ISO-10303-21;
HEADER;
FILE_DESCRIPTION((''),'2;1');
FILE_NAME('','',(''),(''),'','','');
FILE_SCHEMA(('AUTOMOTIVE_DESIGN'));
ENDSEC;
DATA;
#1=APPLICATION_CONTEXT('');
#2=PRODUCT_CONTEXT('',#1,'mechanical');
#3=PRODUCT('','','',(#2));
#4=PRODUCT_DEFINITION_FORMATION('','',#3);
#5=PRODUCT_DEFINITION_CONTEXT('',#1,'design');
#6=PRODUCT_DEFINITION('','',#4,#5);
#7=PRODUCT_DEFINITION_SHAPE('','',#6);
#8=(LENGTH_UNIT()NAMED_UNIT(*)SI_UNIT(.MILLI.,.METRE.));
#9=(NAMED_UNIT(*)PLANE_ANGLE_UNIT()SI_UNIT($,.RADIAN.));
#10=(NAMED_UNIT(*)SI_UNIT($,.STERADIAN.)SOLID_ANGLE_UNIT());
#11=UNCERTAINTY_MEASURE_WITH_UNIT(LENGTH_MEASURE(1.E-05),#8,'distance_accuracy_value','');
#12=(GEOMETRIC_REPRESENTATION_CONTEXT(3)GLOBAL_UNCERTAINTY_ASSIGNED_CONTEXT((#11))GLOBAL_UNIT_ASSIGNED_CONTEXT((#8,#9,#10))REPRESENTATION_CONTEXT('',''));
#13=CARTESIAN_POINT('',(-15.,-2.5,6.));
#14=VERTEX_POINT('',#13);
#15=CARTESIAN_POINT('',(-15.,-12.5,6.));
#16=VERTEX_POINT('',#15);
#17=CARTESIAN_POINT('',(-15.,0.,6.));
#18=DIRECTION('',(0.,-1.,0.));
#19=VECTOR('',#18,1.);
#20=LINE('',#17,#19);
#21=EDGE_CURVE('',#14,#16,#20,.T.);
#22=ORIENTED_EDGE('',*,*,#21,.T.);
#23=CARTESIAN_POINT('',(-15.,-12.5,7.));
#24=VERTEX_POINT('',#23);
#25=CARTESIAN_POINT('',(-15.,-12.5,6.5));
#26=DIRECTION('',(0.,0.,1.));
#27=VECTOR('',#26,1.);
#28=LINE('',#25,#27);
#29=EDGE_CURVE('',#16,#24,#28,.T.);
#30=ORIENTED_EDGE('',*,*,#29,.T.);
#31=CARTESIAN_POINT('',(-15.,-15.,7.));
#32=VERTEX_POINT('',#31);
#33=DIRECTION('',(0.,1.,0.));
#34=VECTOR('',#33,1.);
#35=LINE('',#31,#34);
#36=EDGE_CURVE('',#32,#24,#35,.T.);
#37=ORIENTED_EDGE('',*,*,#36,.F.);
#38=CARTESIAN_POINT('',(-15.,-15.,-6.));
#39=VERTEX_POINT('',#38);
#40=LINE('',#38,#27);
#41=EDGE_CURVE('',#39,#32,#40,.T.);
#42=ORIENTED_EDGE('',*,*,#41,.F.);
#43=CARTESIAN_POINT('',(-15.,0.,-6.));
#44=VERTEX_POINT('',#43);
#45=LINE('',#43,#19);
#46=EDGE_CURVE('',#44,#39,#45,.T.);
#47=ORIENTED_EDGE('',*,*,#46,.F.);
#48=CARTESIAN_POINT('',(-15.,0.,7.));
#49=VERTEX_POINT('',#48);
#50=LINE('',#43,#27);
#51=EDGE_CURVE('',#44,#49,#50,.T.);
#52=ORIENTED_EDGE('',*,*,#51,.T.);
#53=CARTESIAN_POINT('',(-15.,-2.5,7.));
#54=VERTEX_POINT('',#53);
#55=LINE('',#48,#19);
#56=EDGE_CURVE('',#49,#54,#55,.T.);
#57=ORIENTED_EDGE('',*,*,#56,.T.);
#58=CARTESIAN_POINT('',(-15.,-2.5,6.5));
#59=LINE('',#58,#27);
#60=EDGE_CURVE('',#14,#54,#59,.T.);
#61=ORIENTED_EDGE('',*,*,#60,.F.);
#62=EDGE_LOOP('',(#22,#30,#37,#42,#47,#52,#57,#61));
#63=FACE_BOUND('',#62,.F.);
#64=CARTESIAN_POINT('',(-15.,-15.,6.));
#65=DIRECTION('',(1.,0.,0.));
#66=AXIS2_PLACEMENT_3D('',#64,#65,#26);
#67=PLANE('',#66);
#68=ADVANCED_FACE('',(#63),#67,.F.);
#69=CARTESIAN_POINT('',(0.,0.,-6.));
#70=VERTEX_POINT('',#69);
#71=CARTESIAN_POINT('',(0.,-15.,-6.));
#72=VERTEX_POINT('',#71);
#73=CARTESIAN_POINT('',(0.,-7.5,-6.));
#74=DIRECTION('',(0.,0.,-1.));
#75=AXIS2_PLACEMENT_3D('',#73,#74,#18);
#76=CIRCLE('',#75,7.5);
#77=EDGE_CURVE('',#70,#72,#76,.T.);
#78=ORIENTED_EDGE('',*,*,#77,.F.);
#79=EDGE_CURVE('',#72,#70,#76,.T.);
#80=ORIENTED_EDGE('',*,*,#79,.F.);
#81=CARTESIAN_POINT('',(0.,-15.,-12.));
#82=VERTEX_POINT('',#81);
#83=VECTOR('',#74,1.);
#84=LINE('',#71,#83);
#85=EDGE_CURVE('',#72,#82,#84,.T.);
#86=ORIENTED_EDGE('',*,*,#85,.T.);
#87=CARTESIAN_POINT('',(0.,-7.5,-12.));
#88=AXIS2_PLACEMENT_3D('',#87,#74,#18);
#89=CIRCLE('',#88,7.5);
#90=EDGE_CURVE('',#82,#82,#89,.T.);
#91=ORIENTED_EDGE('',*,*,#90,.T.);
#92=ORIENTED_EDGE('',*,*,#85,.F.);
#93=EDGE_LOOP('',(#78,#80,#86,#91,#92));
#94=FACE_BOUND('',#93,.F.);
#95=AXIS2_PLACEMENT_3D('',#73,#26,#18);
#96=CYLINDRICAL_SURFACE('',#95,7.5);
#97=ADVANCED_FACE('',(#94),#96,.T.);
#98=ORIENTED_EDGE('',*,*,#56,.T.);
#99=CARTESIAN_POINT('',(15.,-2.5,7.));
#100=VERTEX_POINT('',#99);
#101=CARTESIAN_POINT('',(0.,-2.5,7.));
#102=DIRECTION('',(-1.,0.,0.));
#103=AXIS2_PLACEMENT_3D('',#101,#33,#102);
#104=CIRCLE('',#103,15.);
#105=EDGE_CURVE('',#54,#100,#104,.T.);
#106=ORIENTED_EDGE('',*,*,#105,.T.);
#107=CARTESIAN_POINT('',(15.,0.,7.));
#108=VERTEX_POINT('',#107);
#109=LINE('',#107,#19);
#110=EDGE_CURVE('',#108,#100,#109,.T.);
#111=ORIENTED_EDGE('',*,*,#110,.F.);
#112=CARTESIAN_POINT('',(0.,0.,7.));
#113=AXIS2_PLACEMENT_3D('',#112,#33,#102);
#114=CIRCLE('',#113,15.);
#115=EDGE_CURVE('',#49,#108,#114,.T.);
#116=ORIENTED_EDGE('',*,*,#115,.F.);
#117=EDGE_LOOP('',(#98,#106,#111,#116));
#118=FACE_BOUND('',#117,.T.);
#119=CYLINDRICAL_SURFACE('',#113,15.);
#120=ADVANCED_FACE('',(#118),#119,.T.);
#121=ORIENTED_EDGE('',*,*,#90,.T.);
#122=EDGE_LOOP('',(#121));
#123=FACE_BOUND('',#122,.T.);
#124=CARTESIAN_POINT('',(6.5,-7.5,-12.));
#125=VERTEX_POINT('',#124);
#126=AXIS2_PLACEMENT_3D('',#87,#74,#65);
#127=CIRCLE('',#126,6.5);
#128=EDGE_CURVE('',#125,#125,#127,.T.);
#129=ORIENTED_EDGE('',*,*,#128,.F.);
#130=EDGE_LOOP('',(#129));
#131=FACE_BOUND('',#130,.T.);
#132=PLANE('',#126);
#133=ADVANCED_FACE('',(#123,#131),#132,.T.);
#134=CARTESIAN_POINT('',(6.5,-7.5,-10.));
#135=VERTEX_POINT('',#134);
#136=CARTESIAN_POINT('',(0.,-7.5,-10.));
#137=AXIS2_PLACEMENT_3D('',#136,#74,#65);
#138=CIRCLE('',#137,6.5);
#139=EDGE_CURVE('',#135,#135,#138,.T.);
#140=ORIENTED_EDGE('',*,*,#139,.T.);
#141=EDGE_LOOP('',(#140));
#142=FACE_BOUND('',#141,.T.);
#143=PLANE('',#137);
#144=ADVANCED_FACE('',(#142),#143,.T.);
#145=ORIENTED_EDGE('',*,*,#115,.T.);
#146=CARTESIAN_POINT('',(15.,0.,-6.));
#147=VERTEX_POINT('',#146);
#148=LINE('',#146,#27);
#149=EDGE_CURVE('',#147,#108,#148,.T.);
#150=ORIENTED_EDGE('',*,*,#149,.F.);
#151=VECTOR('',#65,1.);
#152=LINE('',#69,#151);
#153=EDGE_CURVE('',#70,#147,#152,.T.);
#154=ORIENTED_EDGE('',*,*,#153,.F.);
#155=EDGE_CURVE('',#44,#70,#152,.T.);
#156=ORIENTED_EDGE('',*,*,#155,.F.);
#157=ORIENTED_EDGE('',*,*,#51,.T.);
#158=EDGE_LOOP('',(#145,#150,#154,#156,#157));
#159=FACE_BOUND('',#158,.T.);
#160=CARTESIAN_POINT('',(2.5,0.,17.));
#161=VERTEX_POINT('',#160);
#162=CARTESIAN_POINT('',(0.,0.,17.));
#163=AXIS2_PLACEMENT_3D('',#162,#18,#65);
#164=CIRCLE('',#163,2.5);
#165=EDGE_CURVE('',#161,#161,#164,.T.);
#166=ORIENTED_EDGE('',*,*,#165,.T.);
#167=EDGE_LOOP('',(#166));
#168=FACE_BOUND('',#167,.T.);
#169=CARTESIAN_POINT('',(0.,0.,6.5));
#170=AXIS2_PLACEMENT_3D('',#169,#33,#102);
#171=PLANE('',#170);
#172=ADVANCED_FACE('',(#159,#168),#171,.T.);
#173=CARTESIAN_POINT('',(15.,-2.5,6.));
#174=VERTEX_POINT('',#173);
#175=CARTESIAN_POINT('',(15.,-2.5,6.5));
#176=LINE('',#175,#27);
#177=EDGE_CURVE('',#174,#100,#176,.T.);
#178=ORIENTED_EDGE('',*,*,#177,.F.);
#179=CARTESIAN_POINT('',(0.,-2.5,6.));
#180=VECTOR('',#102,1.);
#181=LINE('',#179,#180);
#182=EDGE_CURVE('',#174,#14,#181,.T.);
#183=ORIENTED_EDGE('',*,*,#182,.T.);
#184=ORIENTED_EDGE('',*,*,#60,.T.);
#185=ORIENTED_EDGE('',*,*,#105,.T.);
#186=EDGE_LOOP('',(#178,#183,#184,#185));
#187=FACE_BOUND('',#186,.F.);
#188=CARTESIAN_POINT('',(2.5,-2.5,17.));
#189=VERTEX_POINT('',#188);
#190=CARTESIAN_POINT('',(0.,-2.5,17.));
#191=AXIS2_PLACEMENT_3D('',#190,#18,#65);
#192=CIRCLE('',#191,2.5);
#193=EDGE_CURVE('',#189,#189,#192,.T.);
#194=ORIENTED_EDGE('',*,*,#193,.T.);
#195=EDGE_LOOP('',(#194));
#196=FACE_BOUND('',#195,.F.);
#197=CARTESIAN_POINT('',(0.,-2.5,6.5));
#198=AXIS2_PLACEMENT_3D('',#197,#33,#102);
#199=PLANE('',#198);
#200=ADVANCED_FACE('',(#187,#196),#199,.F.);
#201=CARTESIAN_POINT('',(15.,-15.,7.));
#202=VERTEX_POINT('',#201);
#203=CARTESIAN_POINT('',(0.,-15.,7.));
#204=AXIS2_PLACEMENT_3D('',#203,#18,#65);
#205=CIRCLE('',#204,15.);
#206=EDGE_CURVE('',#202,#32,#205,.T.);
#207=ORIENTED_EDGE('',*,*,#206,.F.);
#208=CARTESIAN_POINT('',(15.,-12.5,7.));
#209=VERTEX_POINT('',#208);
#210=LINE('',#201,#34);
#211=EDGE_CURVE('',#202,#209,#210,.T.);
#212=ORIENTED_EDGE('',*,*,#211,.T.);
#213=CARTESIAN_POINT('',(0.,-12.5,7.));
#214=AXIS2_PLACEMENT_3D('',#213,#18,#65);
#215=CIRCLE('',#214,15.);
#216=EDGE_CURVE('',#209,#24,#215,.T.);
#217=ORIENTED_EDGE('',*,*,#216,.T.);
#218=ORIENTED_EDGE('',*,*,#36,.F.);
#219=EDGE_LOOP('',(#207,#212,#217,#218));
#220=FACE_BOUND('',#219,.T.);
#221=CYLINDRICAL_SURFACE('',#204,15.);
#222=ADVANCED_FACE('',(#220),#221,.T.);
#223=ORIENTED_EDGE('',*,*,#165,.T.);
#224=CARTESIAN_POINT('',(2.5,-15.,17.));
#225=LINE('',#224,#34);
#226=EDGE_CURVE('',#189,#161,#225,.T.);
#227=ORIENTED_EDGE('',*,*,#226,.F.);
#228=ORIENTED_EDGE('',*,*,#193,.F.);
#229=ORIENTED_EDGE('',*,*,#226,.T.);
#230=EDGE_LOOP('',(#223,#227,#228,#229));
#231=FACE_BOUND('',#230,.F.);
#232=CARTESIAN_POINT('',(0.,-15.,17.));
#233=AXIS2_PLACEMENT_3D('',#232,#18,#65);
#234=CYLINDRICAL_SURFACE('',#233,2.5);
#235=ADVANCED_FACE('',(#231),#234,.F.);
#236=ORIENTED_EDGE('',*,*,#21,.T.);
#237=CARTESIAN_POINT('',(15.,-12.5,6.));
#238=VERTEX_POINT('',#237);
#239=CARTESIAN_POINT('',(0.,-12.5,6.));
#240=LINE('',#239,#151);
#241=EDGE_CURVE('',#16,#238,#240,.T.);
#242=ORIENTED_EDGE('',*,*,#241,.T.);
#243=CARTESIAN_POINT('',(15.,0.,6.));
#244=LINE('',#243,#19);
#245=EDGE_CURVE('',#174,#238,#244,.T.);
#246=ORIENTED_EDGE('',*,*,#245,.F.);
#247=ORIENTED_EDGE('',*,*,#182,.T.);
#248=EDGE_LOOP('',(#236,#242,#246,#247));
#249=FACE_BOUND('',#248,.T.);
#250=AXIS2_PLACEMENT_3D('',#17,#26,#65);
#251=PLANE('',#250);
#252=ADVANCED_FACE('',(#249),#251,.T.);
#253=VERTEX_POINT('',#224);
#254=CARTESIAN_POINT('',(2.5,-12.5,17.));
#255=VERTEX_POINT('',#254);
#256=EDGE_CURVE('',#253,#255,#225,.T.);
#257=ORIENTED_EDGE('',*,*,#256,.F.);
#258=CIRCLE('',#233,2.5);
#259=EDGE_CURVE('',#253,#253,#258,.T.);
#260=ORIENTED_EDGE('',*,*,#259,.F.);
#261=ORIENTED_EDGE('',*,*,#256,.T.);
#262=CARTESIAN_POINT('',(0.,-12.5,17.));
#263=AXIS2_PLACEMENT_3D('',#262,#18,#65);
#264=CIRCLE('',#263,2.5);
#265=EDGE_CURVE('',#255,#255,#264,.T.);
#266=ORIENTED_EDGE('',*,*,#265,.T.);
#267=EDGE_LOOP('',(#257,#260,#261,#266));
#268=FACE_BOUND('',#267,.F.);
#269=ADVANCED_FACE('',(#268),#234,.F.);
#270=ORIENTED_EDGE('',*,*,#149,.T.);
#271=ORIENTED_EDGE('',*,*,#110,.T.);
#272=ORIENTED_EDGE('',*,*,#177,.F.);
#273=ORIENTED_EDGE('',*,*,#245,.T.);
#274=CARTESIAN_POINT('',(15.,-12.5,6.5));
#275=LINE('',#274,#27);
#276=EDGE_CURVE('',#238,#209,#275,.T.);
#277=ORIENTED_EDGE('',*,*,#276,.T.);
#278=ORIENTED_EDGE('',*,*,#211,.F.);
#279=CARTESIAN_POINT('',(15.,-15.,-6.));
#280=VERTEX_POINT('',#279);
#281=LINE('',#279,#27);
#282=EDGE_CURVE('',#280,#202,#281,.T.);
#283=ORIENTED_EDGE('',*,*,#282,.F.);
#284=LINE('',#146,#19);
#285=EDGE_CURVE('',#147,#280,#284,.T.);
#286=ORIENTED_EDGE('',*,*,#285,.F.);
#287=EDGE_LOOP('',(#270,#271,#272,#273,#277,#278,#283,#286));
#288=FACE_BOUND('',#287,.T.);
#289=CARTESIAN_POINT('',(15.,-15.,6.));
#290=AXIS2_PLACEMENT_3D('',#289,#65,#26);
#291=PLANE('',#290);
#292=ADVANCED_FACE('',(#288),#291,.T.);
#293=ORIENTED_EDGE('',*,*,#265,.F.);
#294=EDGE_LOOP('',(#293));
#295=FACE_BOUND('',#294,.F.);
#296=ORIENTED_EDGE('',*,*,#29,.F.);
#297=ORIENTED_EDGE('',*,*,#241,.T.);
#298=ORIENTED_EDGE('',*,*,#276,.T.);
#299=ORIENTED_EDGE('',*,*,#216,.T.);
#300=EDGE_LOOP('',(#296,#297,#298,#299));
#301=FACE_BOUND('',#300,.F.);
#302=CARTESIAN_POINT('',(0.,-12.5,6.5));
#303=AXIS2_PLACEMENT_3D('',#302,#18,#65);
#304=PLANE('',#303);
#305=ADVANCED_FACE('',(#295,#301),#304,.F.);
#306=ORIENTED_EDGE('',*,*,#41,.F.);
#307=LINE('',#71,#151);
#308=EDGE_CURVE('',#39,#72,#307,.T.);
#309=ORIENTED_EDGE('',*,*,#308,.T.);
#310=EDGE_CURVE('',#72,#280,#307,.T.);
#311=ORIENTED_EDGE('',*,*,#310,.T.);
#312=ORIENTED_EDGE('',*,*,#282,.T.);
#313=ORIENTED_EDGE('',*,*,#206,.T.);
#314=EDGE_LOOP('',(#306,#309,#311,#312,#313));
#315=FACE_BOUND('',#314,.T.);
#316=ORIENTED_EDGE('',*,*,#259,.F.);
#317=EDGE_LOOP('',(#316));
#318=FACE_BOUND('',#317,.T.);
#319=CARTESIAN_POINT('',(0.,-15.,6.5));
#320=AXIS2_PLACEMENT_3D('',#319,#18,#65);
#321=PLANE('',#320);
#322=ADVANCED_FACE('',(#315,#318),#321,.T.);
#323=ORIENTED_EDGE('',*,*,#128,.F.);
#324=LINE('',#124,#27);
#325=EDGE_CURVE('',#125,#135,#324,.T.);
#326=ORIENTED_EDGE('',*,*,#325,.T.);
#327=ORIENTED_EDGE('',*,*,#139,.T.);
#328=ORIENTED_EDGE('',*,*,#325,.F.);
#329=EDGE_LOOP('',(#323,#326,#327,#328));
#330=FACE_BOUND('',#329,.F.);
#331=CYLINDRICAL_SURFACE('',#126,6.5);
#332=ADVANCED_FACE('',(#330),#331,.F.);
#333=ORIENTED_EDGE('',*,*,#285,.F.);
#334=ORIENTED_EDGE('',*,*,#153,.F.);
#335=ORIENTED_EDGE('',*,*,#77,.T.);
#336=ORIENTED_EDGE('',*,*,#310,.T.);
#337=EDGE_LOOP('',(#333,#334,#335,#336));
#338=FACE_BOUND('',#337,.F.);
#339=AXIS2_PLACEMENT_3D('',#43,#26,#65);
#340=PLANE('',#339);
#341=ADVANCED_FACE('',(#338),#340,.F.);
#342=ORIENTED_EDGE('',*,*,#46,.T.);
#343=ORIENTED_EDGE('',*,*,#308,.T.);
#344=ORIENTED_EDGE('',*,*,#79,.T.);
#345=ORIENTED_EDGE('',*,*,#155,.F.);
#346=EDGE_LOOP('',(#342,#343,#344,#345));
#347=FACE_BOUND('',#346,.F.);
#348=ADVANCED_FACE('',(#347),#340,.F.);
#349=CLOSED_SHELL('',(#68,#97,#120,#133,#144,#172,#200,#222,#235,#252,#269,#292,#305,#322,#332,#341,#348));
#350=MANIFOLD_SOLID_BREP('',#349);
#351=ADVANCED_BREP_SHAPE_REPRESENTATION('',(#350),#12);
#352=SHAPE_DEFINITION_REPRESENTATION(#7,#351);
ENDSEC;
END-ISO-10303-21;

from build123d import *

# Parameters (mm, degrees)
F0_W      = 30
F0_H      = 12
F1_DEPTH  = 15
F2_W      = 30
F2_H      = 1
F3_DEPTH  = 2.5
F4_W      = 30
F4_H      = 1
F5_DEPTH  = 2.5
F6_R      = 2.5
F7_DEPTH  = 15.001
F9_DEPTH  = 6
F10_R     = 6.5
F11_DEPTH = 2


# Not quite as in the source:
# - a feature names something its author has since deleted; it is built from what else it names


with BuildPart() as f1:
    # F0 (on Front) → F1 (new body)
    with BuildSketch(Plane.XZ):
        Rectangle(F0_W, F0_H)
    extrude(amount=F1_DEPTH)

    # F2 (on face) → F3 (join)
    with BuildSketch(Plane(origin=(0, 0, 0), x_dir=(-1, 0, 0), z_dir=(0, 1, 0))):
        with Locations((0, 6.5)):
            Rectangle(F2_W, F2_H)
        with BuildLine():
            ThreePointArc((15, 7), (0, 22), (-15, 7))
            Line((-15, 7), (15, 7))
        make_face()
    extrude(amount=-F3_DEPTH)

    # F4 (on face) → F5 (join)
    with BuildSketch(Plane.XZ.offset(15)):
        with Locations((0, 6.5)):
            Rectangle(F4_W, F4_H)
        with BuildLine():
            ThreePointArc((15, 7), (0, 22), (-15, 7))
            Line((-15, 7), (15, 7))
        make_face()
    extrude(amount=-F5_DEPTH)

    # F6 (on face) → F7 (cut, through all)
    with BuildSketch(Plane.XZ.offset(15)):
        with Locations((-1.01e-08, 17)):
            Circle(F6_R)
    extrude(amount=-F7_DEPTH, mode=Mode.SUBTRACT)

    # F8 (on face) → F9 (join)
    with BuildSketch(Plane(origin=(0, 0, -6), x_dir=(1, 0, 0), z_dir=(0, 0, -1))):
        with BuildLine():
            ThreePointArc((0, 0), (5.3033008589, 2.1966991411), (7.5, 7.5))
            ThreePointArc((7.5, 7.5), (5.3033008589, 12.8033008589), (0, 15))
            ThreePointArc((0, 15), (-7.5, 7.5), (0, 0))
        make_face()
    extrude(amount=F9_DEPTH)

    # F10 (on face) → F11 (cut)
    with BuildSketch(Plane(origin=(0, 0, -12), x_dir=(1, 0, 0), z_dir=(0, 0, -1))):
        with Locations((0, 7.5)):
            Circle(F10_R)
    extrude(amount=-F11_DEPTH, mode=Mode.SUBTRACT)


solid = f1.part
